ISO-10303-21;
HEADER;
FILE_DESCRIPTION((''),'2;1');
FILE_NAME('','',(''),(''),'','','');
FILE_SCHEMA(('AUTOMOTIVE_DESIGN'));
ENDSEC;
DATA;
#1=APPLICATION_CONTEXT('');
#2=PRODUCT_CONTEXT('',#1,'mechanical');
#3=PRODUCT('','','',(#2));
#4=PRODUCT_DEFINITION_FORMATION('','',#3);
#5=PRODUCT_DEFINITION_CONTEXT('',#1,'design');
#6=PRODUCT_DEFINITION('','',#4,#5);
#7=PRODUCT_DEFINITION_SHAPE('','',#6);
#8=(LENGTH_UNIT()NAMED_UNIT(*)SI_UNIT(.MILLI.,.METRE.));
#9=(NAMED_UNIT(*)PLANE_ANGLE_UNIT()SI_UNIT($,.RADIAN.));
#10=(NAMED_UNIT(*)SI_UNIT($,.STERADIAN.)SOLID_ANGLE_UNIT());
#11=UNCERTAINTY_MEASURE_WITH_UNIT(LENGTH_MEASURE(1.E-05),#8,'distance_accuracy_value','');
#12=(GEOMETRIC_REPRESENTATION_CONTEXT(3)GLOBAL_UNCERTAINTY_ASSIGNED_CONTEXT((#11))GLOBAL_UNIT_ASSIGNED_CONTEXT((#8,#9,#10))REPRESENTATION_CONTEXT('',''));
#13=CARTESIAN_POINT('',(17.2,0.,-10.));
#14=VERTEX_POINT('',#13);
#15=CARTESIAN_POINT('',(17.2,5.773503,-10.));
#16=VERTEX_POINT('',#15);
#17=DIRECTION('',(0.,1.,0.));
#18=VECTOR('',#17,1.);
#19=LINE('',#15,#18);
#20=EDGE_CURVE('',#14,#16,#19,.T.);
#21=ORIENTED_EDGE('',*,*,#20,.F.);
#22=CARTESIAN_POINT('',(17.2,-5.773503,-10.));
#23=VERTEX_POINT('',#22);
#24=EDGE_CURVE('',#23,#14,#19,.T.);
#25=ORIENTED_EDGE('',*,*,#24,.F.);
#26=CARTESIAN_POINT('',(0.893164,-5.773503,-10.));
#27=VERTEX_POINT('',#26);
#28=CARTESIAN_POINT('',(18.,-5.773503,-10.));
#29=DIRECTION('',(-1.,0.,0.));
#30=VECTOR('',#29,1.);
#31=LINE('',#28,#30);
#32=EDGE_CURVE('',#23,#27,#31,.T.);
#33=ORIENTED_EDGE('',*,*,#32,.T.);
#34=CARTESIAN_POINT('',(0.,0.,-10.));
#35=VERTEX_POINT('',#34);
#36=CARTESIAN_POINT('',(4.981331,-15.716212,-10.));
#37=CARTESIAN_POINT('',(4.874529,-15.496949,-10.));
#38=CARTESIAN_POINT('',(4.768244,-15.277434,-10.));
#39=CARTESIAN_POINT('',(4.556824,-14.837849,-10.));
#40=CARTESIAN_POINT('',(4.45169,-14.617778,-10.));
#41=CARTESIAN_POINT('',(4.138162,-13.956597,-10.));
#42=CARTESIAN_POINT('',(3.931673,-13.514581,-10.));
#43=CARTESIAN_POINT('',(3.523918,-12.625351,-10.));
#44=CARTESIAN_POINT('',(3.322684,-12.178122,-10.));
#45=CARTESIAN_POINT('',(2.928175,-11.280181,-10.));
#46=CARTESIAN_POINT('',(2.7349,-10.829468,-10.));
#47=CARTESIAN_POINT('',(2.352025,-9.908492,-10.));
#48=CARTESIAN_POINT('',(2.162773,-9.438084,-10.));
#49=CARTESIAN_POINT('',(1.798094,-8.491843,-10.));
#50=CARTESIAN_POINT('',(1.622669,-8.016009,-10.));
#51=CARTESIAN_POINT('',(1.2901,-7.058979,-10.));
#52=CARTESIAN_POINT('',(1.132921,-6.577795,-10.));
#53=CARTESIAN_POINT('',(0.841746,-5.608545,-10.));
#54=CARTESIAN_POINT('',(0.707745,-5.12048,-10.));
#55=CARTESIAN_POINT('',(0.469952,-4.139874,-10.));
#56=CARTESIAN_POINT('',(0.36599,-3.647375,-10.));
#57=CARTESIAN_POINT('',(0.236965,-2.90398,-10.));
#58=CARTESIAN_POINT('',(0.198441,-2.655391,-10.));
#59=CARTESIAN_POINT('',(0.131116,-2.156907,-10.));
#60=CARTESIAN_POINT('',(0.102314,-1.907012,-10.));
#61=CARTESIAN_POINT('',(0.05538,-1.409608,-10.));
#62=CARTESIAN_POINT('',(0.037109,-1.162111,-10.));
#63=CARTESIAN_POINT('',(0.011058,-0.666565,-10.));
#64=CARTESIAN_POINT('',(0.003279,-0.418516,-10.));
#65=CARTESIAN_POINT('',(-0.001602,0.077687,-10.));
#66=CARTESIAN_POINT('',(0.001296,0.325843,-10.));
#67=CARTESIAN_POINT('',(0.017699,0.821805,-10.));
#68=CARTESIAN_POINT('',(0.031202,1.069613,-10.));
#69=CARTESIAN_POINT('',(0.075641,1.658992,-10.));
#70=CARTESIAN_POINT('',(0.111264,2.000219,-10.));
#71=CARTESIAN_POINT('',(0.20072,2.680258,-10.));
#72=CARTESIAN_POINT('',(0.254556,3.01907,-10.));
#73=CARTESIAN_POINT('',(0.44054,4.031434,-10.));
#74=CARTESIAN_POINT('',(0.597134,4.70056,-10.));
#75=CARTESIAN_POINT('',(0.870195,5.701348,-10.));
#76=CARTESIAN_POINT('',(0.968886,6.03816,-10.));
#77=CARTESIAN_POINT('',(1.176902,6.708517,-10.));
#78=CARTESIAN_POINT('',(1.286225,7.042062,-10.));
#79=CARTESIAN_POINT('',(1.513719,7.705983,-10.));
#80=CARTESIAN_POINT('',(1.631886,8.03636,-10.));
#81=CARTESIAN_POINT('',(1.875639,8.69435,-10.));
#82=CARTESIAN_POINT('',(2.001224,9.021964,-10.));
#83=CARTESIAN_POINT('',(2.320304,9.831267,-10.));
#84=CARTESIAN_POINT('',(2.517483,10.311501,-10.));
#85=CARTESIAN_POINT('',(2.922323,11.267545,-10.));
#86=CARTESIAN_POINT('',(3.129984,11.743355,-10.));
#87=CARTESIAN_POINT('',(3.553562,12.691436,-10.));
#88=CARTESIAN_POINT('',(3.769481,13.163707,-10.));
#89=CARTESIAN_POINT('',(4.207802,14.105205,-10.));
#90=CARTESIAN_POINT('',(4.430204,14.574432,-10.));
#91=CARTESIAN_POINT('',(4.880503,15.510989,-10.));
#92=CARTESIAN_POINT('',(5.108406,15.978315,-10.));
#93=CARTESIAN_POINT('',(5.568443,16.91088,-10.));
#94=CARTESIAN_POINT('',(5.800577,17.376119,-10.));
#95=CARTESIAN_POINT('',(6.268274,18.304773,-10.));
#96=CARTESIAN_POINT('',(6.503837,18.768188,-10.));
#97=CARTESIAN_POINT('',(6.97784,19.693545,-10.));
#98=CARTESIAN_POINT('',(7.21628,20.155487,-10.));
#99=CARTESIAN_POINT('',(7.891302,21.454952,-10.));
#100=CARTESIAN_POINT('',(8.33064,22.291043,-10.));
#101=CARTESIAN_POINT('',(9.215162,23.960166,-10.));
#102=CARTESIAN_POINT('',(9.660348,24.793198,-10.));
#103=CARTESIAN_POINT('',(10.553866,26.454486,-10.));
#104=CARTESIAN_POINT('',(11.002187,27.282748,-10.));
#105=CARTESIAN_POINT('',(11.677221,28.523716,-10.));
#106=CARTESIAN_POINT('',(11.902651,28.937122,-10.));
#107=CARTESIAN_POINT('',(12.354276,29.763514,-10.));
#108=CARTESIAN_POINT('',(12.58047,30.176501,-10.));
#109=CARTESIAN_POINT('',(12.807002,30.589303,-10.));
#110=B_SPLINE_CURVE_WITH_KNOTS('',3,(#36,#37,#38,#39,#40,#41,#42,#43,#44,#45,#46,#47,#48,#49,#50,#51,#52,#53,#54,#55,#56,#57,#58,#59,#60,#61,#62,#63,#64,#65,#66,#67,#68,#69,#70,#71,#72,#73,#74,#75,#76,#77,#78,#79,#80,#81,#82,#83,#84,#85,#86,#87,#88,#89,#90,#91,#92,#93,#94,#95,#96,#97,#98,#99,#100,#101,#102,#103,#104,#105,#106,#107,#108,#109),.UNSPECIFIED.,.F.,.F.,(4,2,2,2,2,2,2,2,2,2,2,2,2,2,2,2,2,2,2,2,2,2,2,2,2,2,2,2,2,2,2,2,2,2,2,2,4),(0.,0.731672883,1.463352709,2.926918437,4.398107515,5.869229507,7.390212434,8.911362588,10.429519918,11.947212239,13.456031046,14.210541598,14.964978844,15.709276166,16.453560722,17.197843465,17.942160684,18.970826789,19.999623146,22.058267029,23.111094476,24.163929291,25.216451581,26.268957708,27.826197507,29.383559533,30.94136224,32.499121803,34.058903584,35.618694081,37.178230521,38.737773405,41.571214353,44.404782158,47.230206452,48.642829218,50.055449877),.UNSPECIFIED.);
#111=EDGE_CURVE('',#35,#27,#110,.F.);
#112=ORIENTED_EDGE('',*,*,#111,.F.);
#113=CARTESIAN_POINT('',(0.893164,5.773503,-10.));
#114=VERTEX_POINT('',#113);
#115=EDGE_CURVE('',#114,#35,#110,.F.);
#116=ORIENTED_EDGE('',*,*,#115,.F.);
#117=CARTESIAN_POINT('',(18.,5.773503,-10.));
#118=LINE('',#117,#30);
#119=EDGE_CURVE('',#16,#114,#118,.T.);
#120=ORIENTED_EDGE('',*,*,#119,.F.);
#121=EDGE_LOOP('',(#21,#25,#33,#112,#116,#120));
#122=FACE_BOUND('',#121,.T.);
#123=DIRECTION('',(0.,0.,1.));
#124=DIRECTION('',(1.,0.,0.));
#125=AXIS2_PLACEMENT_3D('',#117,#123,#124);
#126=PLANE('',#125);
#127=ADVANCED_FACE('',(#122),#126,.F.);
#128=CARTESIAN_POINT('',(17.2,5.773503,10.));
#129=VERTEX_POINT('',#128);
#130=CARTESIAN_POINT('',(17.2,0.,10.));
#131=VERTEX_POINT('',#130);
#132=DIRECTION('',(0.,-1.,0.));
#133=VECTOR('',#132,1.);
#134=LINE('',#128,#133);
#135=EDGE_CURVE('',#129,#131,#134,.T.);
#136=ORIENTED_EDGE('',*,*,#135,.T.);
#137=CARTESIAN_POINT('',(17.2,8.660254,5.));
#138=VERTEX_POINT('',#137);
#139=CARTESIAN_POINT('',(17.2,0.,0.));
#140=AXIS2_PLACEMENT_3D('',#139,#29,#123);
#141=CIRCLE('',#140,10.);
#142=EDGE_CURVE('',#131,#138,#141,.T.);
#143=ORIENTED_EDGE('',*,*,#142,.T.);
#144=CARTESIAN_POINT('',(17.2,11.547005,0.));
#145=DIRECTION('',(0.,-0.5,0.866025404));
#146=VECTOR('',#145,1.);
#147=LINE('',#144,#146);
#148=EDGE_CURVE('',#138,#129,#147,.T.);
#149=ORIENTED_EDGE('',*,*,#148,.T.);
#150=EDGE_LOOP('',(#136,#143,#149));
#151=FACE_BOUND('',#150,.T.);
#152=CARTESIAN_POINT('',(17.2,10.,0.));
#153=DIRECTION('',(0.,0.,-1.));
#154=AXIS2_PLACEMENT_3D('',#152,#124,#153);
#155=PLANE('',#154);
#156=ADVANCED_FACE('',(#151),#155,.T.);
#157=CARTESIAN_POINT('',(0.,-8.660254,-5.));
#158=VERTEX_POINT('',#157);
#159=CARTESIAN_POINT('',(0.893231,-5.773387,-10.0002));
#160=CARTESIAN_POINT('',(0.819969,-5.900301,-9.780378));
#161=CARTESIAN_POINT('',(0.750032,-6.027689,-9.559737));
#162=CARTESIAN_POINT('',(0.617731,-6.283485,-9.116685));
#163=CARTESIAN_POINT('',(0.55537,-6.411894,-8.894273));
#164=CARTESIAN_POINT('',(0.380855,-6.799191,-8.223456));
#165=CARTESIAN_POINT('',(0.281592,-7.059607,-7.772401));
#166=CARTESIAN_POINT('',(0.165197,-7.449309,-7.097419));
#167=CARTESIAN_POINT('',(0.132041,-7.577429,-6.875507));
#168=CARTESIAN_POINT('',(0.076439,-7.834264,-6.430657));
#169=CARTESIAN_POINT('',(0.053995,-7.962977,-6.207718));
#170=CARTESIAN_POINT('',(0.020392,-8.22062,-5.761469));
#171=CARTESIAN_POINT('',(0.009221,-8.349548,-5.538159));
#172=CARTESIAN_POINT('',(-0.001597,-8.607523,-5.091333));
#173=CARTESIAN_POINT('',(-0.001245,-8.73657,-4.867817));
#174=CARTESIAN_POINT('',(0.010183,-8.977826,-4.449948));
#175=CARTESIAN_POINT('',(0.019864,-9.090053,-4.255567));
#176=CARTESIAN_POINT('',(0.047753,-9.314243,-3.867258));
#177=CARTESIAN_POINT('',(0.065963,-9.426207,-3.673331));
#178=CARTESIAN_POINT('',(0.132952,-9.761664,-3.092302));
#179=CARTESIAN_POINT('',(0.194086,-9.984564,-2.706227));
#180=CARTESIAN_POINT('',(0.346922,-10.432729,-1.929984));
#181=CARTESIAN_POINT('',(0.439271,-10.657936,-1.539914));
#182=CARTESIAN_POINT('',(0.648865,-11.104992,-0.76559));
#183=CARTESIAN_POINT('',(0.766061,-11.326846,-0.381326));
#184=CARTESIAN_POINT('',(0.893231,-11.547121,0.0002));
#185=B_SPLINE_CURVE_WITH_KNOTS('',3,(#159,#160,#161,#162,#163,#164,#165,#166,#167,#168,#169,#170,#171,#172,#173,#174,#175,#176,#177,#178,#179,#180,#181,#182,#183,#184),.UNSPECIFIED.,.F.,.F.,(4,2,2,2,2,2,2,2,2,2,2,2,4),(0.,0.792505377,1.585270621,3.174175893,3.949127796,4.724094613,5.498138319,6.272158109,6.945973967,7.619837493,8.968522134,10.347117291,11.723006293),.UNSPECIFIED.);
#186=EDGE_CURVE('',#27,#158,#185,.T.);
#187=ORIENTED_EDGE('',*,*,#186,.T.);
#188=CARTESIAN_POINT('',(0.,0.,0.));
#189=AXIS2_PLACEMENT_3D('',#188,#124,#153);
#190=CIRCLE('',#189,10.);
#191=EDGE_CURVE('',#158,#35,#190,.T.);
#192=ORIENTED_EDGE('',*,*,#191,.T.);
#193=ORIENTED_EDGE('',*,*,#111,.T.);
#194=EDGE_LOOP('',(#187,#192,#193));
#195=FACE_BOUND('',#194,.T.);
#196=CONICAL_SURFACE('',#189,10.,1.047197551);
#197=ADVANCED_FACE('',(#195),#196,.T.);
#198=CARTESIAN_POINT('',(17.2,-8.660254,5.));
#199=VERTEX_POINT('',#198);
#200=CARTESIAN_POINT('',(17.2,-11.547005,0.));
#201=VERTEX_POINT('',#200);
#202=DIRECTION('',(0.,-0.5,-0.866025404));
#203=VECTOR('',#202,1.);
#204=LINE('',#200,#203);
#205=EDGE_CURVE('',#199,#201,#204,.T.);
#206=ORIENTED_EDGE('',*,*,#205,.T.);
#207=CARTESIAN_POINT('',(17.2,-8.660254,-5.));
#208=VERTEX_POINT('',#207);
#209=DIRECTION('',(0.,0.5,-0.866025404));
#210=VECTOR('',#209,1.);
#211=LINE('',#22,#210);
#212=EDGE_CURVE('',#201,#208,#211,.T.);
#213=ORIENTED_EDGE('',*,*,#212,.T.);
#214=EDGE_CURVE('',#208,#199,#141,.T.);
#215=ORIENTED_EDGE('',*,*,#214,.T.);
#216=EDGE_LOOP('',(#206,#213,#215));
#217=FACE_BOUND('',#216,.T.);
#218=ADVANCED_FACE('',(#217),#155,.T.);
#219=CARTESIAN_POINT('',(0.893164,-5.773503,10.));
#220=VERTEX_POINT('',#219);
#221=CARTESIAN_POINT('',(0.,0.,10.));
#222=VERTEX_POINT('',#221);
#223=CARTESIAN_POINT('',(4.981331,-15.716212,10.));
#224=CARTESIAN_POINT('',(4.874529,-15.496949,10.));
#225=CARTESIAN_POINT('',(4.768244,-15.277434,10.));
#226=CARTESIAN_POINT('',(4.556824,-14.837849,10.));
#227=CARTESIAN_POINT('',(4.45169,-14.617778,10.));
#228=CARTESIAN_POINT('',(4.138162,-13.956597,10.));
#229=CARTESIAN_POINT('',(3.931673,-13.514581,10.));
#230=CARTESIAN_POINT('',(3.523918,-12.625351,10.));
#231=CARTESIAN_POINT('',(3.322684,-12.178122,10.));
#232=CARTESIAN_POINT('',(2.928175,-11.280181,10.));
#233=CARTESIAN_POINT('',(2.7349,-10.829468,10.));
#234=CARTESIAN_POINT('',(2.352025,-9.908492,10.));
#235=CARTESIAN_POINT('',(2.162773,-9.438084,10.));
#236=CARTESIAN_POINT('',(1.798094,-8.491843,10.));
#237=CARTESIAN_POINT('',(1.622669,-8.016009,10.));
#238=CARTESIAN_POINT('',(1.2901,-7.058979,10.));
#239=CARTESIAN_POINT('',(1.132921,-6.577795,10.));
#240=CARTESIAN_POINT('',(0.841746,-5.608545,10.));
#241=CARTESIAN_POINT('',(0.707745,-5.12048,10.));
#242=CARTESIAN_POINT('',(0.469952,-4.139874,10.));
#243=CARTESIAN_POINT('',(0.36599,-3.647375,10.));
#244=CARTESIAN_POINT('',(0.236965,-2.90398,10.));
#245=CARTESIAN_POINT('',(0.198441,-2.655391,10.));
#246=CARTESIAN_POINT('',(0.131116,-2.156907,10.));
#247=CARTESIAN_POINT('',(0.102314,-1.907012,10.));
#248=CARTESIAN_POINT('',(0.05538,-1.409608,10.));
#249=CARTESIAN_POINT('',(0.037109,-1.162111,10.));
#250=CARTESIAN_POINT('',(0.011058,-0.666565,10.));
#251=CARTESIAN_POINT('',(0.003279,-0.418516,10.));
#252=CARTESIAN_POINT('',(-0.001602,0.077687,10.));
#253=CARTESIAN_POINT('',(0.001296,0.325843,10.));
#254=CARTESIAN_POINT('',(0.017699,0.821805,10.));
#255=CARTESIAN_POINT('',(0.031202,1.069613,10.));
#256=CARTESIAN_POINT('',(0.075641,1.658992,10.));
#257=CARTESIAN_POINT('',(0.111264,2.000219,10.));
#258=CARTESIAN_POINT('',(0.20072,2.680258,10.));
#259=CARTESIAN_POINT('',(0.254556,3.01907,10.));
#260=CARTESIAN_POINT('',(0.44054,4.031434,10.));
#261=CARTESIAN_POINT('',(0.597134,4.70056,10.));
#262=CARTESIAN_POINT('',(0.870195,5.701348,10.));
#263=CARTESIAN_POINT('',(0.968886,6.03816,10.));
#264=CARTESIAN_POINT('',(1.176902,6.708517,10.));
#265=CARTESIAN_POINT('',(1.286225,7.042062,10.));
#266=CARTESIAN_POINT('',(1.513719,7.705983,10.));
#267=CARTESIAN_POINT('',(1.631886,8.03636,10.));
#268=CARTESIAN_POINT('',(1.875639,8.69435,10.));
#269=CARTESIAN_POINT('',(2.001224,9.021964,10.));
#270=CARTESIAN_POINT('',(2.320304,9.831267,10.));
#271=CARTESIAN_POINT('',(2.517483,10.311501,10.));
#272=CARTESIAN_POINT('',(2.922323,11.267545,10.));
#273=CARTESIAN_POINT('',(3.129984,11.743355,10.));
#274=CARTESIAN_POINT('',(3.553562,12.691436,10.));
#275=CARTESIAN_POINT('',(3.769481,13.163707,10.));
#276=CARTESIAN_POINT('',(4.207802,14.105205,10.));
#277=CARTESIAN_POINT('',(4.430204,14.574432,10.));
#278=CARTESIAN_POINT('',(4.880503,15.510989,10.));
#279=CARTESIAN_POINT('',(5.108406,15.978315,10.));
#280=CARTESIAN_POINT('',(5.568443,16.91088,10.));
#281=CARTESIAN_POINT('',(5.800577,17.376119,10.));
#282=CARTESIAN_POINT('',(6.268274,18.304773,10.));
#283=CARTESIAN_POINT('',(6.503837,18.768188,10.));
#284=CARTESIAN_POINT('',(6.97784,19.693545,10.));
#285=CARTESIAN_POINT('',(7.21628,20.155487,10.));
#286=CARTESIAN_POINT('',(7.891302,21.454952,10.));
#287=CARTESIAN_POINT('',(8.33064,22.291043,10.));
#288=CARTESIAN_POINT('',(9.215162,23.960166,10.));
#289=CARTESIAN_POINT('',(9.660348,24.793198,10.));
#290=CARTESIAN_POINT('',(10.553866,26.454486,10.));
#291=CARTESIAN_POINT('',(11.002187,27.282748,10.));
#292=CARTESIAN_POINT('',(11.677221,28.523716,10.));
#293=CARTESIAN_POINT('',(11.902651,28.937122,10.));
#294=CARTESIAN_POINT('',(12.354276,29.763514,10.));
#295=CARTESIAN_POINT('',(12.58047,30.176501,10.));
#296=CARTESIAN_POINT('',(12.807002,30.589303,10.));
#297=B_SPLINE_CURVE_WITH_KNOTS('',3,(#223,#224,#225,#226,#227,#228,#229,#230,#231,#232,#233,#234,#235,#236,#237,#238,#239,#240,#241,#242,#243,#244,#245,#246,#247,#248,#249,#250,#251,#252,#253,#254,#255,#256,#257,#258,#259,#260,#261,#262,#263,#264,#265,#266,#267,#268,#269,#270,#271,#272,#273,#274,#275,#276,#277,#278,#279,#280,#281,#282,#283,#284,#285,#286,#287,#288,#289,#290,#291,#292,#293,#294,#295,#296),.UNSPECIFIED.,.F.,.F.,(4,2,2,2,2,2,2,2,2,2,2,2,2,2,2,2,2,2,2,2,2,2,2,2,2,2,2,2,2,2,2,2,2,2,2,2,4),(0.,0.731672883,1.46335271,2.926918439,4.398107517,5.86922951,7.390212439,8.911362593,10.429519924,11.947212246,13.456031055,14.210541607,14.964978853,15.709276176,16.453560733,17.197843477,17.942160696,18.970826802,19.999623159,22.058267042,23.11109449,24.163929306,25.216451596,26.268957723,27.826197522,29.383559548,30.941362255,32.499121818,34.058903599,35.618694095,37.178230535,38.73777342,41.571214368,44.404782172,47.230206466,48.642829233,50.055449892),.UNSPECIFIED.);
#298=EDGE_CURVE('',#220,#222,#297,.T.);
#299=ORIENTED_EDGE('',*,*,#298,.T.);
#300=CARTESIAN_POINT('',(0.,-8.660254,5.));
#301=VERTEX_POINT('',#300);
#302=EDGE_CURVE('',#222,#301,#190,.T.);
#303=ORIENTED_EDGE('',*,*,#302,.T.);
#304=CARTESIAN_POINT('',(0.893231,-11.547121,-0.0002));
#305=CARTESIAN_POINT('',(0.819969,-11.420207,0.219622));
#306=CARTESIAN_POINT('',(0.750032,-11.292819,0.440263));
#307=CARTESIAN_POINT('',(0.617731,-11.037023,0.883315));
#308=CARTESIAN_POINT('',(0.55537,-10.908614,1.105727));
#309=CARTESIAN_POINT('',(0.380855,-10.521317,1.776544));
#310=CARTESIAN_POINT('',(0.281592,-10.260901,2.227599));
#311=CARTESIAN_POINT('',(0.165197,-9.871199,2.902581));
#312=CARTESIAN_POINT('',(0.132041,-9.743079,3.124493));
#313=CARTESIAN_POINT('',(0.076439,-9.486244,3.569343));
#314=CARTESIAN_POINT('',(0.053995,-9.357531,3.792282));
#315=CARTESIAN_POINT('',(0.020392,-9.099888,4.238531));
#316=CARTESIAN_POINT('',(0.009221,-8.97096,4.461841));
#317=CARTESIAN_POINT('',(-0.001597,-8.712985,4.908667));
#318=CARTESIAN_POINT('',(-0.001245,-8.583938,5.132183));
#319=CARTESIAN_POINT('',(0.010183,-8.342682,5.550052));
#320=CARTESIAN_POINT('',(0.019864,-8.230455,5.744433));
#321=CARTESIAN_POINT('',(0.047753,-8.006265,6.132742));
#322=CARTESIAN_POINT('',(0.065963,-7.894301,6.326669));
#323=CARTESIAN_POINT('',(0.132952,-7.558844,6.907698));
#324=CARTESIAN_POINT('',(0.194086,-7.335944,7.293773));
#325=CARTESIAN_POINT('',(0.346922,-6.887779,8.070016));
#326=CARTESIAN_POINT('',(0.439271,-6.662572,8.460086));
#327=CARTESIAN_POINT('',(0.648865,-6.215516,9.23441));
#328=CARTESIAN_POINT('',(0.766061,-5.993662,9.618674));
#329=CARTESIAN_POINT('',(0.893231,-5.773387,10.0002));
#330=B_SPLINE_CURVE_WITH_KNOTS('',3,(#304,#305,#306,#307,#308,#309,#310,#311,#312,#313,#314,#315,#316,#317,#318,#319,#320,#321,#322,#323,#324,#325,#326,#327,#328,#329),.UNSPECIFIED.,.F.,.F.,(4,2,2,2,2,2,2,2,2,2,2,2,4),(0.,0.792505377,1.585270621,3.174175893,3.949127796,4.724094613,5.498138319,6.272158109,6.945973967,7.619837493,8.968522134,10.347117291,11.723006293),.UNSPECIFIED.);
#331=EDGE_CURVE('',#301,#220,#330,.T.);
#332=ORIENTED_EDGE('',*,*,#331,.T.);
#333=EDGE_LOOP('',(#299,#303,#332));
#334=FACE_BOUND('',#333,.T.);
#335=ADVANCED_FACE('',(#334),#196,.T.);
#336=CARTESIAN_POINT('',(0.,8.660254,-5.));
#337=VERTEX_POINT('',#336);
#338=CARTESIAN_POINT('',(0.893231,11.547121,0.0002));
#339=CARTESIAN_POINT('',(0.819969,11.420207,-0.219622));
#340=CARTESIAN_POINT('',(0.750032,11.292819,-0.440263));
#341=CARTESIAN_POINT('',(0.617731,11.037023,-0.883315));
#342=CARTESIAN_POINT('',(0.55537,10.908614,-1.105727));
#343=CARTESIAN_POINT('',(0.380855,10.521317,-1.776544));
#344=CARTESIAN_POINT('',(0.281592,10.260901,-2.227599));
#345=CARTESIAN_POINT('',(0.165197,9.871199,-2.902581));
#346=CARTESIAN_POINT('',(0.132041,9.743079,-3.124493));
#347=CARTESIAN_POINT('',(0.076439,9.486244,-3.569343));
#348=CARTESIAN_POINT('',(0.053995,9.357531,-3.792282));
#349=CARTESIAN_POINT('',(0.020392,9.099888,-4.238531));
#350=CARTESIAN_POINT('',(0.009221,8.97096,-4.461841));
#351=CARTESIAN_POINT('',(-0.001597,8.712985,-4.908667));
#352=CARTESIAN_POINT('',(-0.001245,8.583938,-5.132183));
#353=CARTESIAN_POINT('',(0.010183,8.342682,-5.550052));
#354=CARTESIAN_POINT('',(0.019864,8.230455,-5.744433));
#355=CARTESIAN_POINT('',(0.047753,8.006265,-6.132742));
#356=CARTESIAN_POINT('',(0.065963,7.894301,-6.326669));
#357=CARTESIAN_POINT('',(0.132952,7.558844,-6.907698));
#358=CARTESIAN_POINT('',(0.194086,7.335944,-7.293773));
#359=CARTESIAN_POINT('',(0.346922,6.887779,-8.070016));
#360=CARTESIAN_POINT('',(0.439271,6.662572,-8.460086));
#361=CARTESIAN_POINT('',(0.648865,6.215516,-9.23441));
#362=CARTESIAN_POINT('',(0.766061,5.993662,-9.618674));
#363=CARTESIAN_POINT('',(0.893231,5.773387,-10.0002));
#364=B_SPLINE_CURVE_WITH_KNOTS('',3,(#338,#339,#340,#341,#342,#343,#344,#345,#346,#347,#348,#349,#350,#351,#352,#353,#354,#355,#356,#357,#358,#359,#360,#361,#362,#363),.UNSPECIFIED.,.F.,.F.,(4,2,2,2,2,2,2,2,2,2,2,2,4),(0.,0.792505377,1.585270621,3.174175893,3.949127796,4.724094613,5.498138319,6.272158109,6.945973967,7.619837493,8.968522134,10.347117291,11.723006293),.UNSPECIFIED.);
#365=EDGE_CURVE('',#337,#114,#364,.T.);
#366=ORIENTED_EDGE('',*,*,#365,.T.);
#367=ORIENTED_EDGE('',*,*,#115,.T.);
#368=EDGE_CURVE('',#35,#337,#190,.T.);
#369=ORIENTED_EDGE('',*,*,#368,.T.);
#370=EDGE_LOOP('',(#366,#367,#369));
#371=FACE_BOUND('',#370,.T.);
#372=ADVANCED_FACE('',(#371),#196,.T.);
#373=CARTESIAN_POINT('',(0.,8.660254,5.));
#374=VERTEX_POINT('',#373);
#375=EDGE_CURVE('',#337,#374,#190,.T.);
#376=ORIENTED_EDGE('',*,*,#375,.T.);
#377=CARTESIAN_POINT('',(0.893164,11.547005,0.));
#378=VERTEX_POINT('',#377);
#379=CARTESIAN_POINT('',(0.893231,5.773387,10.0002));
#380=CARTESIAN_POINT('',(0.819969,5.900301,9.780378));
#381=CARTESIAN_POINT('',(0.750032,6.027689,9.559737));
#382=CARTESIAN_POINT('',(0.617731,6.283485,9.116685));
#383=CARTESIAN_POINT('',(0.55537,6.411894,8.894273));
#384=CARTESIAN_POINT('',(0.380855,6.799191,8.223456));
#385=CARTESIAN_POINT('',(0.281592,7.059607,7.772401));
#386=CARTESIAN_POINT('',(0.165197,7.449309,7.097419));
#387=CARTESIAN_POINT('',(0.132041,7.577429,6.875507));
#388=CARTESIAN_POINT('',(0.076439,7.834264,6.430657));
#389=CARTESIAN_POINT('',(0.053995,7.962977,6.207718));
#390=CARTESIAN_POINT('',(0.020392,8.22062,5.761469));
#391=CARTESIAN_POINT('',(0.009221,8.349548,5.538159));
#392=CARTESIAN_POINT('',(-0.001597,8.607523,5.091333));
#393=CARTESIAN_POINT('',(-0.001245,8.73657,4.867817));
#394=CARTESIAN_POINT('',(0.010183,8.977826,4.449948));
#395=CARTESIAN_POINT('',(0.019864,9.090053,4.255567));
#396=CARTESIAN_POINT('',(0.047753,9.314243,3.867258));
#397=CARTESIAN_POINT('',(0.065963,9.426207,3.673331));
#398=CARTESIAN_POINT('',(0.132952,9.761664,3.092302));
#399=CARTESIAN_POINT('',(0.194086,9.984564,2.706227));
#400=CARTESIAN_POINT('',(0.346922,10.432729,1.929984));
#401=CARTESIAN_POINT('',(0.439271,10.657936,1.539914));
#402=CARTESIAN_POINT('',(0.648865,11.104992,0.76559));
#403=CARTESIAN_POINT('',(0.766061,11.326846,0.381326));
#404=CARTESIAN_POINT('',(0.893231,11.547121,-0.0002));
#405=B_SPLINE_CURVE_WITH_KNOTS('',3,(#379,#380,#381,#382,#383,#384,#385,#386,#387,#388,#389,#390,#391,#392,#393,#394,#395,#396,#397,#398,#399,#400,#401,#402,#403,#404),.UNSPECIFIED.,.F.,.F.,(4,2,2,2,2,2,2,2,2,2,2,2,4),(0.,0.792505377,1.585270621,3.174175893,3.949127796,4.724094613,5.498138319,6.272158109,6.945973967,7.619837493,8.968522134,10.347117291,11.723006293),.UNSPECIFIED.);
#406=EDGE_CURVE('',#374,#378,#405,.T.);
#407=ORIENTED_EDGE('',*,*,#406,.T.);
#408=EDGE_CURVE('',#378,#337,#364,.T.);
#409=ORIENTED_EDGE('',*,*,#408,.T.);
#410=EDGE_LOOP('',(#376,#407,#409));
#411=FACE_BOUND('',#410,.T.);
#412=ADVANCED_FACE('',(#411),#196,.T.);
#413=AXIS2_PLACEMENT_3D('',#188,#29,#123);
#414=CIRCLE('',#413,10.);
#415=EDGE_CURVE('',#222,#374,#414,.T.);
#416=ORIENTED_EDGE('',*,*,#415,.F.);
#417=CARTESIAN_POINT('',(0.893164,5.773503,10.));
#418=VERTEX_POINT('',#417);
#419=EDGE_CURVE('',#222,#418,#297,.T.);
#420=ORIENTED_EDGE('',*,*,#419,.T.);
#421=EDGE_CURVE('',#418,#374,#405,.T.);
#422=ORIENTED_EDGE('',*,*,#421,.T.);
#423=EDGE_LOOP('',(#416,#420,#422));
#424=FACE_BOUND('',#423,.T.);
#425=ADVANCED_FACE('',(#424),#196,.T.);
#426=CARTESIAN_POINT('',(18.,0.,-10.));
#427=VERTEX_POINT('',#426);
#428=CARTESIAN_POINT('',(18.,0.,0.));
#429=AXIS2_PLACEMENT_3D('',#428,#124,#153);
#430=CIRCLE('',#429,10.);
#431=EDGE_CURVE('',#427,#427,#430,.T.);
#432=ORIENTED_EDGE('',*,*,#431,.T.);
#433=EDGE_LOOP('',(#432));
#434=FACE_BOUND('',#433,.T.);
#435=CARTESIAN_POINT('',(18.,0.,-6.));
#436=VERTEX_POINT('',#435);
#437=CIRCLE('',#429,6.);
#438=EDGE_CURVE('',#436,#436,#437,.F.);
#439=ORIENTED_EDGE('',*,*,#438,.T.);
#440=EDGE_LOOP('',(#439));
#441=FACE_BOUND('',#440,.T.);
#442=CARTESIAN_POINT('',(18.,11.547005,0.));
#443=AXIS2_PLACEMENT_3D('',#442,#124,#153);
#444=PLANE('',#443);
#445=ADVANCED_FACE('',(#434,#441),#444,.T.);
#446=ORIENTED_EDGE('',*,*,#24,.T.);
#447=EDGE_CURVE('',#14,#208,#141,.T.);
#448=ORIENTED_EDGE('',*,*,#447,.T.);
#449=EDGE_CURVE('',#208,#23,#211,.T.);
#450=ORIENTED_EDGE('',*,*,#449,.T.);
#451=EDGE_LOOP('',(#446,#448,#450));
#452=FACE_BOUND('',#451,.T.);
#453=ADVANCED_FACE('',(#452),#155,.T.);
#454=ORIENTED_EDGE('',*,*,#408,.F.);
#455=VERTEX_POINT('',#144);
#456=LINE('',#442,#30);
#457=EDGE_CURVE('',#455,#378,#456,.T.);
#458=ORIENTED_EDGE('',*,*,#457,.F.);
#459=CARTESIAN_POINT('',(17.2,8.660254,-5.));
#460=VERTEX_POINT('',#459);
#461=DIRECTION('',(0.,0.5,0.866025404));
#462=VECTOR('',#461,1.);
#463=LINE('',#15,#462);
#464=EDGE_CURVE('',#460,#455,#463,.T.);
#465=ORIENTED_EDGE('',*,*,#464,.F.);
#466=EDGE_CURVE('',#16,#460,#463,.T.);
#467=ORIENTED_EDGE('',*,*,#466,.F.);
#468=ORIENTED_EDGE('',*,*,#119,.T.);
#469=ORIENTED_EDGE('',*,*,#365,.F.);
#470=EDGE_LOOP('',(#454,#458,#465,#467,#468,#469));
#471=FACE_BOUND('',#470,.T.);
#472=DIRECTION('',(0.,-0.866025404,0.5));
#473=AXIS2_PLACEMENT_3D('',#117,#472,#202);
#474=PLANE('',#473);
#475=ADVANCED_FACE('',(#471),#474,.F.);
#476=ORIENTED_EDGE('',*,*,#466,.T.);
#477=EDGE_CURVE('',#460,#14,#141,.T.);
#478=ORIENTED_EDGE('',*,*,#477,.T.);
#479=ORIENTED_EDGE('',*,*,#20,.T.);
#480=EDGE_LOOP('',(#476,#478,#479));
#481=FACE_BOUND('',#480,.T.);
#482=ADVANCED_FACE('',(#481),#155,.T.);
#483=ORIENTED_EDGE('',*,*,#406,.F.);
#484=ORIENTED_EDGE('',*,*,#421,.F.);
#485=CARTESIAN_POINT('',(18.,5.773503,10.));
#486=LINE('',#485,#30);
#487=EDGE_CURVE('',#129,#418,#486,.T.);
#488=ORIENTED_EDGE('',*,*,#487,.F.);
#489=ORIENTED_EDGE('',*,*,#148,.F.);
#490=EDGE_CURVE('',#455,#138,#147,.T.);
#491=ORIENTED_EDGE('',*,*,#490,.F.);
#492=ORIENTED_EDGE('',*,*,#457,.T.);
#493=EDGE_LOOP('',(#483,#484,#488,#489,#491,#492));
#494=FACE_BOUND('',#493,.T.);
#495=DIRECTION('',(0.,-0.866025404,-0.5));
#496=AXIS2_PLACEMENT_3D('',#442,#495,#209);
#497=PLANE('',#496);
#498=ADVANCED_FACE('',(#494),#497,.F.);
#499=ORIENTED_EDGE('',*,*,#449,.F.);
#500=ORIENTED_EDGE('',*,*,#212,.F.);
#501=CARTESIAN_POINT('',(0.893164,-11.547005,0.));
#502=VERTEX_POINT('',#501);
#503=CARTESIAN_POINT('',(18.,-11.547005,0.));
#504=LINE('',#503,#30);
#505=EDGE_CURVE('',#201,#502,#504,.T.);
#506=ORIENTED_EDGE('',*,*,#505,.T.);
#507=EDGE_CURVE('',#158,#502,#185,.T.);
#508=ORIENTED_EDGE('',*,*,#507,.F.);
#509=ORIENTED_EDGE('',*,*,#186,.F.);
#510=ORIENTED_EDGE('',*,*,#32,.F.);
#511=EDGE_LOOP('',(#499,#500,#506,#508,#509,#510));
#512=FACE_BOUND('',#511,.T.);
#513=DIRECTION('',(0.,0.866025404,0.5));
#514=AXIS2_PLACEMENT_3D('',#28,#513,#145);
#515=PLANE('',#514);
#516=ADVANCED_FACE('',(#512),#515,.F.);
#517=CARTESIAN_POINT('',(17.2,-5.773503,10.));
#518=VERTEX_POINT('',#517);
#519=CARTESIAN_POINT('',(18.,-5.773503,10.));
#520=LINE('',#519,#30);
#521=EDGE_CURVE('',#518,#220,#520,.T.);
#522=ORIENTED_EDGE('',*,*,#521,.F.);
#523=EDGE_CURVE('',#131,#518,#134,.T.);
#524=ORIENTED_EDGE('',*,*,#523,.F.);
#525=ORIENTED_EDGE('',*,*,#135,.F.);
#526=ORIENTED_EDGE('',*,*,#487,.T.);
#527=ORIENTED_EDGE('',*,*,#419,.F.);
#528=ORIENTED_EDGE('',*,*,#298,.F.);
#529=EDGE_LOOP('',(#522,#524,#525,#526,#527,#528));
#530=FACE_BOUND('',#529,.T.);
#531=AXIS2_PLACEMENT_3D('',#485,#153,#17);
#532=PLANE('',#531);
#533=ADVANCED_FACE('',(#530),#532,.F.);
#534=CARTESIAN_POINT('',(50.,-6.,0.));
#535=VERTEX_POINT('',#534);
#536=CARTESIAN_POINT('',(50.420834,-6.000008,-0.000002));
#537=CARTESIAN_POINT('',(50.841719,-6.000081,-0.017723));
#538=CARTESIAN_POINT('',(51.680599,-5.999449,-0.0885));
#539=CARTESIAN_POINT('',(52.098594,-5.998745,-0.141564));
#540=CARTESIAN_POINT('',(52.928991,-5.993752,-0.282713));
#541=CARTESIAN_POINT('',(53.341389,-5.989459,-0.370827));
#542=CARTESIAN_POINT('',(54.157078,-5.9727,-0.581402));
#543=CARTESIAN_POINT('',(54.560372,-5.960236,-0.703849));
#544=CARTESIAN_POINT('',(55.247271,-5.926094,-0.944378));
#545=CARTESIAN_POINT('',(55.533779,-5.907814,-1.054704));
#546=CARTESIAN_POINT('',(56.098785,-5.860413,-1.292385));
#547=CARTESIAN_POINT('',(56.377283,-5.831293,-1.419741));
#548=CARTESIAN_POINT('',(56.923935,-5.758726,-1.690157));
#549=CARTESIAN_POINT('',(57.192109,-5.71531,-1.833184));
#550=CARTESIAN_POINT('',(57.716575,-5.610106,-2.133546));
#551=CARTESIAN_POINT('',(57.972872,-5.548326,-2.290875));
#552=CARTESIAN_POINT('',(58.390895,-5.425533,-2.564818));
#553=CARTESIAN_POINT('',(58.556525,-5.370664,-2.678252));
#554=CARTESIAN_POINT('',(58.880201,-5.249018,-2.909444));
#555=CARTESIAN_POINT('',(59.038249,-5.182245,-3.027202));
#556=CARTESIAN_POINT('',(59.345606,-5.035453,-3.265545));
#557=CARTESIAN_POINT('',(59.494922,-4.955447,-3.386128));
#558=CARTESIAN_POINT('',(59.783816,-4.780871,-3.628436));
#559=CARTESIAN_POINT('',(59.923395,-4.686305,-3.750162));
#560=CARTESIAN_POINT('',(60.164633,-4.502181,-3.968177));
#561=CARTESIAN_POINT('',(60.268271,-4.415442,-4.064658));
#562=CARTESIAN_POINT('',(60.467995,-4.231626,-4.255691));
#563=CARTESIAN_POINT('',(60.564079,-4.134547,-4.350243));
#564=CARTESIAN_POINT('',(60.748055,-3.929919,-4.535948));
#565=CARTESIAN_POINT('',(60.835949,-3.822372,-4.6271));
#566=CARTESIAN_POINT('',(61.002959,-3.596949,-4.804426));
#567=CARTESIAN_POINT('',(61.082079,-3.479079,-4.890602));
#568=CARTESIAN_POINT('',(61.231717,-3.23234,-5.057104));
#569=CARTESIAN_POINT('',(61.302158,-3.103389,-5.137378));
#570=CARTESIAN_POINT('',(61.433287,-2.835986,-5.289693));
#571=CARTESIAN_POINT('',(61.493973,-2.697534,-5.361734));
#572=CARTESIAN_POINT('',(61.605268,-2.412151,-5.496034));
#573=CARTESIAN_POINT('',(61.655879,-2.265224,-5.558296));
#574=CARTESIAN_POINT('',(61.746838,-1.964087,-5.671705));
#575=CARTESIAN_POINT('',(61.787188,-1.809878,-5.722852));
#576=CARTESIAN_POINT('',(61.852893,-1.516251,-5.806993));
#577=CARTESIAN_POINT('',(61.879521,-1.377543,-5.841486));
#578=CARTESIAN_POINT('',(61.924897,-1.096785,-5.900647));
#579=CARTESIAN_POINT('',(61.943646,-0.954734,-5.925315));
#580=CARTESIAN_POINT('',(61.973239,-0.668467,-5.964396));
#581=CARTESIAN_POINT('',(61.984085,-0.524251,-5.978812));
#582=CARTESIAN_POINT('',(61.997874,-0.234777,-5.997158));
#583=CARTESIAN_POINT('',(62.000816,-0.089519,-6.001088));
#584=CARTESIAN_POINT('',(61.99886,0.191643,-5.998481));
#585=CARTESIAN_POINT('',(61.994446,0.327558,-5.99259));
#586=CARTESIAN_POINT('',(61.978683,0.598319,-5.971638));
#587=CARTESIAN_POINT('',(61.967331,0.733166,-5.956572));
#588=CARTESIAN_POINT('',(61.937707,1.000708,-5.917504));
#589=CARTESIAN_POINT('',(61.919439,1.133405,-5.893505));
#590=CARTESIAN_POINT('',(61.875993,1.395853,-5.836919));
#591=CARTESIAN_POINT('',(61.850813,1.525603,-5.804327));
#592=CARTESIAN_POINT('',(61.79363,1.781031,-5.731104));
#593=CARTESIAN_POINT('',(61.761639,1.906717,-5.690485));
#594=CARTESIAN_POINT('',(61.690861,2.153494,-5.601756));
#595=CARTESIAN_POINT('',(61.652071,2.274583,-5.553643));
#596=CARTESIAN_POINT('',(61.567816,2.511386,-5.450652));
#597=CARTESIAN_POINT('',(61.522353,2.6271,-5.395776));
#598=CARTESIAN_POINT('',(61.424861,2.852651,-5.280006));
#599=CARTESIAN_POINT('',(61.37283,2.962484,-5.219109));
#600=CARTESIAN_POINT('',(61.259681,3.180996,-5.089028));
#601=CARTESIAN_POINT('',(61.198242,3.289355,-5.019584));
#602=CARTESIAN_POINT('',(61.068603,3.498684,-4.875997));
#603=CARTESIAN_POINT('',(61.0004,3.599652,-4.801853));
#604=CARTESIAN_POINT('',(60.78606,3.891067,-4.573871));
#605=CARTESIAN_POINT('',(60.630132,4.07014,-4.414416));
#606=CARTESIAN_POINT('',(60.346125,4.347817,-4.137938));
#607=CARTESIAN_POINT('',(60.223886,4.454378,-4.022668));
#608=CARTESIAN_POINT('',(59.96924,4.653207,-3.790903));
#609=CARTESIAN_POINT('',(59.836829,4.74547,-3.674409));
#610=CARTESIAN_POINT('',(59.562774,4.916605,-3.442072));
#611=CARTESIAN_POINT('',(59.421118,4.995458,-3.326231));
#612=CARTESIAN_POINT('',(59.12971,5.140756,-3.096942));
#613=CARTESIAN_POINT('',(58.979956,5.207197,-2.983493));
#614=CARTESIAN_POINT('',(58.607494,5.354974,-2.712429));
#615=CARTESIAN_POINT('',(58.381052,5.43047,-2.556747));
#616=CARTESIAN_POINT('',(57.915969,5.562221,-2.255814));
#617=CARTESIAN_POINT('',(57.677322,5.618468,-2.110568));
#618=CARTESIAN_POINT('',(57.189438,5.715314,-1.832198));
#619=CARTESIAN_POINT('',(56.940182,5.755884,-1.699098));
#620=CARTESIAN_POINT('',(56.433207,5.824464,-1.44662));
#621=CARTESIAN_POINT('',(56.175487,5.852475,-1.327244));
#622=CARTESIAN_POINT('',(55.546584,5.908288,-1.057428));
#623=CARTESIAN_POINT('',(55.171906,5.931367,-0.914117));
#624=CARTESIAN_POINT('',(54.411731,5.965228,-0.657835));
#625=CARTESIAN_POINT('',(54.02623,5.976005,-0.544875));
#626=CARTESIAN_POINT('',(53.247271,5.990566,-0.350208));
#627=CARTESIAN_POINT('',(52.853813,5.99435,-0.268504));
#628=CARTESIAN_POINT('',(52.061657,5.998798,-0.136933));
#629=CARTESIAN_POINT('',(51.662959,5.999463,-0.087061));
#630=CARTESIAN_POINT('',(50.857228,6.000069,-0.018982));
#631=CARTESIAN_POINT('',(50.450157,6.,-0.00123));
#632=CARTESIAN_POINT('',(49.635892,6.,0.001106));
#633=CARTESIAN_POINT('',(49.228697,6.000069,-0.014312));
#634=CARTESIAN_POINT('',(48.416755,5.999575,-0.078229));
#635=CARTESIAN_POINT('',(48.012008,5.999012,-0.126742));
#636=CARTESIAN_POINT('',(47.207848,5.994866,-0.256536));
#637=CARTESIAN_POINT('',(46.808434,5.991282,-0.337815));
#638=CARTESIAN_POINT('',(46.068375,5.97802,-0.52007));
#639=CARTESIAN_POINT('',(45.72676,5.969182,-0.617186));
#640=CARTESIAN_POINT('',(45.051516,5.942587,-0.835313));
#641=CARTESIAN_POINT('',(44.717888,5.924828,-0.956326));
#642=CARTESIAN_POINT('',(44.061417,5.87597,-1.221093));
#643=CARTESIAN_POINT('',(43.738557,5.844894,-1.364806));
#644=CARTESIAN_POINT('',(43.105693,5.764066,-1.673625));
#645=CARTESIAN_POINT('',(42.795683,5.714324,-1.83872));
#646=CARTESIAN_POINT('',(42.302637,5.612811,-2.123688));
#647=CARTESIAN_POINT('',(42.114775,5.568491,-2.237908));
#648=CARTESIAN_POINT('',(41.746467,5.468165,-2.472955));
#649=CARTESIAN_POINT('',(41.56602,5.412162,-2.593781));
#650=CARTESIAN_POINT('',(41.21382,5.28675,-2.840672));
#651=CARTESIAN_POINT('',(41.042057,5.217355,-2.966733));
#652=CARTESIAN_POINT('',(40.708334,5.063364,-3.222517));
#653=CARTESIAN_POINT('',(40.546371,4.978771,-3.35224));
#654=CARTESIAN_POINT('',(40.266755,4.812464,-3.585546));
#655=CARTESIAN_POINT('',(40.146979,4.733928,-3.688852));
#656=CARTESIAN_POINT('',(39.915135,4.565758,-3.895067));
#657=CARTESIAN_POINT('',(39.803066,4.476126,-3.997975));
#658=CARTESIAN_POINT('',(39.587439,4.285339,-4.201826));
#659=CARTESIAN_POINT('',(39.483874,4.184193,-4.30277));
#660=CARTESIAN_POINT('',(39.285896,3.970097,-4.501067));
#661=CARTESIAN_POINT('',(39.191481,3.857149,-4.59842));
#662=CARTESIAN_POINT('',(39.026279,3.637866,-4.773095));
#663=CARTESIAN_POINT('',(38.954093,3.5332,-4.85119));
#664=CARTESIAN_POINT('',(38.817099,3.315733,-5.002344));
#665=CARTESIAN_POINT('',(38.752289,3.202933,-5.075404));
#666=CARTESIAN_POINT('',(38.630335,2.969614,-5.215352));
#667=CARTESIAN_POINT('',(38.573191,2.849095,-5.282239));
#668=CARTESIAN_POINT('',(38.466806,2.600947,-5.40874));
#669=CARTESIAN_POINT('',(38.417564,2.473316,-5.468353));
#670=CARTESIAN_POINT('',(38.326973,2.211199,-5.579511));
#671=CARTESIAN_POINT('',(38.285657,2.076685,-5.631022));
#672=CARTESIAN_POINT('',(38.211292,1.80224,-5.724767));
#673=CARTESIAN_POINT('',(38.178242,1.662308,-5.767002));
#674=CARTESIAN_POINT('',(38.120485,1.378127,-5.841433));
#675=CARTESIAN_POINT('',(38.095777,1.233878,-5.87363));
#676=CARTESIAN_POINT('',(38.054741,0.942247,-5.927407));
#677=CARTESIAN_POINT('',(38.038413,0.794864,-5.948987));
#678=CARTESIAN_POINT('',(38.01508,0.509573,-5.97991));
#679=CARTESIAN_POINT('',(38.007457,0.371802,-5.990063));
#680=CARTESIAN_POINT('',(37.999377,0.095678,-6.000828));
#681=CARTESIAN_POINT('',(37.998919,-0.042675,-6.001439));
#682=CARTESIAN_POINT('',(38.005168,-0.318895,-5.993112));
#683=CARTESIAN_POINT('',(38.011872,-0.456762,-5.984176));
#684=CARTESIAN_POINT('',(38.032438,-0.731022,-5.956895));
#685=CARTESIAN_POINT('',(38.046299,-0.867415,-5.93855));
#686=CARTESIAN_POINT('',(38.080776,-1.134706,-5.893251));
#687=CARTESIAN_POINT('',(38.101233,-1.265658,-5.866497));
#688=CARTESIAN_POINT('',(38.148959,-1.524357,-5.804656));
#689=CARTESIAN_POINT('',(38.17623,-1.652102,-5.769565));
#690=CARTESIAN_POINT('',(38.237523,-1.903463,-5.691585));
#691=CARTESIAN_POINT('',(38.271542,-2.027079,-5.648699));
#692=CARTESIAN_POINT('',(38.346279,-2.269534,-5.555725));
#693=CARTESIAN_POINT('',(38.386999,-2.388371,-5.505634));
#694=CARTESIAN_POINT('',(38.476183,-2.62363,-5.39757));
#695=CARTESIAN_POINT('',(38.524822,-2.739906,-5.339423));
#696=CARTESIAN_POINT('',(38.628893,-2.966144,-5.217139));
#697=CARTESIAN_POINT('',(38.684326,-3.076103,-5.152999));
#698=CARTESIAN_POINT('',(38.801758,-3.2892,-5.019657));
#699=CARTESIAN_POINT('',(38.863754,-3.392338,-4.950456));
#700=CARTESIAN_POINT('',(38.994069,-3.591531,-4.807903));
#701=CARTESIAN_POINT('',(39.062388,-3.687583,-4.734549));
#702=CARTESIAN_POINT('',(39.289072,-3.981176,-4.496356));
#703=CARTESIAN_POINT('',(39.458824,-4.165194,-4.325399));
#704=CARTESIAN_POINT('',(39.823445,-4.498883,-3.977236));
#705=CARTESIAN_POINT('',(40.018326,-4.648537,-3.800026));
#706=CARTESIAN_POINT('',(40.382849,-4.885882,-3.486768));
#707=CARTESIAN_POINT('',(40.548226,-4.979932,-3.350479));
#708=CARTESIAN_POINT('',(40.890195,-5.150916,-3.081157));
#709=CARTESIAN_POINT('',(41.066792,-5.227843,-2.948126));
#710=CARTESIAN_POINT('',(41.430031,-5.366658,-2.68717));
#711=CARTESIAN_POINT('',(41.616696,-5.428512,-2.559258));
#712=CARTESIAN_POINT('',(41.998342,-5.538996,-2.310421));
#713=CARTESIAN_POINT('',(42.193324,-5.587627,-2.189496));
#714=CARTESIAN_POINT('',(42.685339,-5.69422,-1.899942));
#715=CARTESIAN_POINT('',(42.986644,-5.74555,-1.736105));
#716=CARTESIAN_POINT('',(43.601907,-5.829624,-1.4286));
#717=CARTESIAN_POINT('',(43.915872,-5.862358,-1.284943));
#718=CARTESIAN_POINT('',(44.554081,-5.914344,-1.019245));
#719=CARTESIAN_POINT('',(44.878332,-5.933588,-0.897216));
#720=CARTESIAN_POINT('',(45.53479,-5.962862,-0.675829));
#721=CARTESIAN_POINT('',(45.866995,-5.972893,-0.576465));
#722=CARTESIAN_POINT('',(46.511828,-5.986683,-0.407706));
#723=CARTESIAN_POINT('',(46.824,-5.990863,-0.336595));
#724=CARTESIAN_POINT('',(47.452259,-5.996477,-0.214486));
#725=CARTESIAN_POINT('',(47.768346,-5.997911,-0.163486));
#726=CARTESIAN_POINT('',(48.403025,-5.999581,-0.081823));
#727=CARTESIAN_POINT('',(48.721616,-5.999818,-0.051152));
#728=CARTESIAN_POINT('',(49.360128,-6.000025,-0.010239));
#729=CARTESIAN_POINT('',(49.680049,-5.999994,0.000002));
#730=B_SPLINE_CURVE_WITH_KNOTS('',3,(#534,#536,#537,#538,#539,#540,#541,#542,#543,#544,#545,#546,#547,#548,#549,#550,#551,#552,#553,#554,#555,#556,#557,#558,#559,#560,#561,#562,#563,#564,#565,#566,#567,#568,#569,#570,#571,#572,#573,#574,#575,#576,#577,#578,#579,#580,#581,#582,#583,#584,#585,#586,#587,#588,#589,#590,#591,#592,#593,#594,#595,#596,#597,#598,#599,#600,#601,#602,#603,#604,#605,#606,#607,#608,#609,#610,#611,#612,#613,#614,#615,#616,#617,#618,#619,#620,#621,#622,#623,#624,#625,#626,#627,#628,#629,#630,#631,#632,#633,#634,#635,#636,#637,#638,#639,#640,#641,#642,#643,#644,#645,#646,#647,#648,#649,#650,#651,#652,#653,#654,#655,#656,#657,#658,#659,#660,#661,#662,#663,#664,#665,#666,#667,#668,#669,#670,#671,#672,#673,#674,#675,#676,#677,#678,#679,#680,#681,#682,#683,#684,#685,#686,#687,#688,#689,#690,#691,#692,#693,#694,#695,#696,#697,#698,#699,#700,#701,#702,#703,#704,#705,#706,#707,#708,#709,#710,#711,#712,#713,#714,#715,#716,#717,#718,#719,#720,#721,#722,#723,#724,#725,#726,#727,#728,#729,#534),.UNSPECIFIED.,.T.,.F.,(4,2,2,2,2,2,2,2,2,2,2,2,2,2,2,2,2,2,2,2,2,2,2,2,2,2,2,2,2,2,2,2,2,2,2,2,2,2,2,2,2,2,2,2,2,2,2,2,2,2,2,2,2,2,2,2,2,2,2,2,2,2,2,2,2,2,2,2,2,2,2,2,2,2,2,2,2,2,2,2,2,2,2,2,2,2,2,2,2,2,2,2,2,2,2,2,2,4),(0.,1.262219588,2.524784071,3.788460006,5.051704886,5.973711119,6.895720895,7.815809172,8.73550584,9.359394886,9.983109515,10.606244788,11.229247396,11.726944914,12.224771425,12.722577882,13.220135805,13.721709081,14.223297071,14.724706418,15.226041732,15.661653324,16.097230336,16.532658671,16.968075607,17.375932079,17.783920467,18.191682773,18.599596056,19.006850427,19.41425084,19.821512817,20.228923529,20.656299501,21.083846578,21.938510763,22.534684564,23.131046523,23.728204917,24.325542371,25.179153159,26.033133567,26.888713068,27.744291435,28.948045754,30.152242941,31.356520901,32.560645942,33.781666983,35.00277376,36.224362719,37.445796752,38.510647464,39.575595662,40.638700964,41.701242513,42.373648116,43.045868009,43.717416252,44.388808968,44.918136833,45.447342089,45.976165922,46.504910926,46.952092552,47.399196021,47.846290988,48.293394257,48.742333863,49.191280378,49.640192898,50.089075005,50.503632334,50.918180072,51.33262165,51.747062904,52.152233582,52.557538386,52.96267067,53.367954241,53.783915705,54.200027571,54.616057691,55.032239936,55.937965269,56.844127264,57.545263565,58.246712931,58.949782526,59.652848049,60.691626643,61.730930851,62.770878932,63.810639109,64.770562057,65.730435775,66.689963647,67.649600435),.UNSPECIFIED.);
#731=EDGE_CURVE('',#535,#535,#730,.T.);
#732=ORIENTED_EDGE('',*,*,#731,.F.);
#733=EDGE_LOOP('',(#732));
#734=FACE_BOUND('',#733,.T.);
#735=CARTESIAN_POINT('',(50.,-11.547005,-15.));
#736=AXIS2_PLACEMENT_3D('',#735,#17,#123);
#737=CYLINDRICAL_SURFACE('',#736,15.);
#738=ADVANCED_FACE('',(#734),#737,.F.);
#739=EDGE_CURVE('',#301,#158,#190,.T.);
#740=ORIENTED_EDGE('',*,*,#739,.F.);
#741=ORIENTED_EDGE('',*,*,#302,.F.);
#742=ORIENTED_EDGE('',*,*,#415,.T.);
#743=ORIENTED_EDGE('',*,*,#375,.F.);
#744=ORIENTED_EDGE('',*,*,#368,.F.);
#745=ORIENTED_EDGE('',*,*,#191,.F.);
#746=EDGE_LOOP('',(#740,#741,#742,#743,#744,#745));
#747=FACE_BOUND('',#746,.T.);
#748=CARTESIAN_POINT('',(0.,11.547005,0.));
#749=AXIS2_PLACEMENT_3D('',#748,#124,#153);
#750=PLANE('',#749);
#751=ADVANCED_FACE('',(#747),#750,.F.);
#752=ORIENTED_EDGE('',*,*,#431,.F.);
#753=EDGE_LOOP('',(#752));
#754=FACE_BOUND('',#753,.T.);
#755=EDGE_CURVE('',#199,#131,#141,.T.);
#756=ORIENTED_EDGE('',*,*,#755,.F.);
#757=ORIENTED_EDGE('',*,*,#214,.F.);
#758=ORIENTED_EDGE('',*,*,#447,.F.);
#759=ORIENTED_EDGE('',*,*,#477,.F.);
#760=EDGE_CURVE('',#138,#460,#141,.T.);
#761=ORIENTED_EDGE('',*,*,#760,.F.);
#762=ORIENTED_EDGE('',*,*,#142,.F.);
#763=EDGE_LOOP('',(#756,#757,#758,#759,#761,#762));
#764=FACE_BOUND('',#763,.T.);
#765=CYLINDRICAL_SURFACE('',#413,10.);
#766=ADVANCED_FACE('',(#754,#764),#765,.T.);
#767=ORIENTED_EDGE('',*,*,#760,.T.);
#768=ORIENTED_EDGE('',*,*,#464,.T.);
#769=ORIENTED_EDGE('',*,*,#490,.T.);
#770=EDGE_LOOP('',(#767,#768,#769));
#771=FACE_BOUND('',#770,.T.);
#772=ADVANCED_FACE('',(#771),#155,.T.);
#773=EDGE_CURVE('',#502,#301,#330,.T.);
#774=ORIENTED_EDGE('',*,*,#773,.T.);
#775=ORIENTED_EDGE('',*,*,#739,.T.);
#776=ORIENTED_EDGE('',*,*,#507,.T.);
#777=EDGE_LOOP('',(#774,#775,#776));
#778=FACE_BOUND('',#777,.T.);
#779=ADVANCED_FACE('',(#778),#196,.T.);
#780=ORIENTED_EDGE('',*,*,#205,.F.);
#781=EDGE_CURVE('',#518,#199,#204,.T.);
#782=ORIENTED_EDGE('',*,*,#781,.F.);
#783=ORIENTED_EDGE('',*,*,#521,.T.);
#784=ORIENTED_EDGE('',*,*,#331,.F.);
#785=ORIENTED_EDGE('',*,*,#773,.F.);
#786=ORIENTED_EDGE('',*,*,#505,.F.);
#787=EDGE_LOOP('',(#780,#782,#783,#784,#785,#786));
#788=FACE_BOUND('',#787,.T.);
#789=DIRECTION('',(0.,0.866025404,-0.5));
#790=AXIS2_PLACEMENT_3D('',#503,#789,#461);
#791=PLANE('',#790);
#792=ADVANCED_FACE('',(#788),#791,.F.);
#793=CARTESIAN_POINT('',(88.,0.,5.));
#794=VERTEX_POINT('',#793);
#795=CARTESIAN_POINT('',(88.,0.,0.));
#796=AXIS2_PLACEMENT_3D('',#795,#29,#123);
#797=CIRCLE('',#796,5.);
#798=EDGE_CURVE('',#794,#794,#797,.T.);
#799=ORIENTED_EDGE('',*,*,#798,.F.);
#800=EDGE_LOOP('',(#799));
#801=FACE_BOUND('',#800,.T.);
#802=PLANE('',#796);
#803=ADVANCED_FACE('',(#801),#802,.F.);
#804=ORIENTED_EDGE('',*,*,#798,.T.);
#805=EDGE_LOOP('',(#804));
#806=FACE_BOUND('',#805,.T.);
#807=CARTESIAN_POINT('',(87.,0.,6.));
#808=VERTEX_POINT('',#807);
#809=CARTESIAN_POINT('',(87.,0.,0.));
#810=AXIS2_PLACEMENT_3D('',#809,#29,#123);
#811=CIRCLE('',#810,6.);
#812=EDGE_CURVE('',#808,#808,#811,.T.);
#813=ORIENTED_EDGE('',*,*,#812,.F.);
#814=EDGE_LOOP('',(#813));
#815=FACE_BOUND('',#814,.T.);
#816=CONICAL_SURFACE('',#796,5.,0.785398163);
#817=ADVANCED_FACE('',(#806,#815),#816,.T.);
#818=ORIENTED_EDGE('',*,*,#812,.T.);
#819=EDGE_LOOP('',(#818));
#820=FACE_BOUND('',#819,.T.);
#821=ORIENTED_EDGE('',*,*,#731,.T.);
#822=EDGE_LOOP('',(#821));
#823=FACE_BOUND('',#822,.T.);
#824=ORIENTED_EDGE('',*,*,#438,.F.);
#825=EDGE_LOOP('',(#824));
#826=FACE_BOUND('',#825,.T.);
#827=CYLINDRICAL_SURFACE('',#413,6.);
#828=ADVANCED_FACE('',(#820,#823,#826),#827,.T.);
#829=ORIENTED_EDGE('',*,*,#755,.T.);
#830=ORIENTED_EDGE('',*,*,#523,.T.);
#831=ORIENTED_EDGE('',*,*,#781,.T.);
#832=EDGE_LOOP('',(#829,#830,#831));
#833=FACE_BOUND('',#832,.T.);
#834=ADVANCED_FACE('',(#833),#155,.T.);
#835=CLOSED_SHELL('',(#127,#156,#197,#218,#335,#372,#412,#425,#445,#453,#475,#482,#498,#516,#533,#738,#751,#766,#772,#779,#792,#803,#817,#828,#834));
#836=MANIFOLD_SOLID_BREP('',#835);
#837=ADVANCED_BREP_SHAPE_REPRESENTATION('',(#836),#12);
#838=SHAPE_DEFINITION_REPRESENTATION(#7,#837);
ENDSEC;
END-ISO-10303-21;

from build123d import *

# Parameters (mm, degrees)
BASEHEAD_DEPTH          = 18
SKETCH4_W               = 0.8
SKETCH4_H               = 11.547005384
CUT_EXTRUDE1_DEPTH      = 90.315918702
CUT_EXTRUDE1_DEPTH_BACK = 90.315918702
SKETCH6_R               = 15


# Read off the part's stored shape, not the designer's step: HeadChamfer
with BuildPart() as part:
    # Sketch1 → BaseHead (new body)
    with BuildSketch(Plane(origin=(0, 0, 0), x_dir=(0, 0, -1), z_dir=(1, 0, 0))):
        Polygon((10, 5.773502692), (10, -5.773502692), (0, -11.547005384), (-10, -5.773502692), (-10, 5.773502692), (0, 11.547005384), align=None)
    extrude(amount=BASEHEAD_DEPTH)

    # HeadChamfer outline → HeadChamfer (revolve, cut)
    with BuildSketch(Plane.YX):
        Polygon((11.547005388, 0.893163977), (10, 0), (11.547005388, 0), align=None)
    revolve(axis=Axis((0, 0, 0), (1, 0, 0)), mode=Mode.SUBTRACT)

    # HeadChamfer 2 outline → HeadChamfer 2 (revolve)
    with BuildSketch(Plane.YX):
        Polygon((6, 18), (6, 87), (5, 88), (0, 88), (0, 18), align=None)
    revolve(axis=Axis((0, 0, 0), (1, 0, 0)))

    # Sketch4 → BearingFace (revolve, cut)
    with BuildSketch(Plane.XY, mode=Mode.PRIVATE) as bearingface_sk:
        with Locations((17.6, 15.773502692)):
            Rectangle(SKETCH4_W, SKETCH4_H)
    revolve(bearingface_sk.sketch.rotate(Axis((0, 0, 0), (1, 0, 0)), 90), axis=Axis((0, 0, 0), (1, 0, 0)), mode=Mode.SUBTRACT)

    # Sketch6 → Cut-Extrude1 (cut, two sides: drawn at the far end of the back side and taken through both)
    with BuildSketch(Plane(origin=(0, 0, 0), x_dir=(1, 0, 0), z_dir=(0, 1, 0)).offset(-CUT_EXTRUDE1_DEPTH_BACK)):
        with Locations((50, 15)):
            Circle(SKETCH6_R)
    extrude(amount=CUT_EXTRUDE1_DEPTH + CUT_EXTRUDE1_DEPTH_BACK, mode=Mode.SUBTRACT)


solid = part.part
